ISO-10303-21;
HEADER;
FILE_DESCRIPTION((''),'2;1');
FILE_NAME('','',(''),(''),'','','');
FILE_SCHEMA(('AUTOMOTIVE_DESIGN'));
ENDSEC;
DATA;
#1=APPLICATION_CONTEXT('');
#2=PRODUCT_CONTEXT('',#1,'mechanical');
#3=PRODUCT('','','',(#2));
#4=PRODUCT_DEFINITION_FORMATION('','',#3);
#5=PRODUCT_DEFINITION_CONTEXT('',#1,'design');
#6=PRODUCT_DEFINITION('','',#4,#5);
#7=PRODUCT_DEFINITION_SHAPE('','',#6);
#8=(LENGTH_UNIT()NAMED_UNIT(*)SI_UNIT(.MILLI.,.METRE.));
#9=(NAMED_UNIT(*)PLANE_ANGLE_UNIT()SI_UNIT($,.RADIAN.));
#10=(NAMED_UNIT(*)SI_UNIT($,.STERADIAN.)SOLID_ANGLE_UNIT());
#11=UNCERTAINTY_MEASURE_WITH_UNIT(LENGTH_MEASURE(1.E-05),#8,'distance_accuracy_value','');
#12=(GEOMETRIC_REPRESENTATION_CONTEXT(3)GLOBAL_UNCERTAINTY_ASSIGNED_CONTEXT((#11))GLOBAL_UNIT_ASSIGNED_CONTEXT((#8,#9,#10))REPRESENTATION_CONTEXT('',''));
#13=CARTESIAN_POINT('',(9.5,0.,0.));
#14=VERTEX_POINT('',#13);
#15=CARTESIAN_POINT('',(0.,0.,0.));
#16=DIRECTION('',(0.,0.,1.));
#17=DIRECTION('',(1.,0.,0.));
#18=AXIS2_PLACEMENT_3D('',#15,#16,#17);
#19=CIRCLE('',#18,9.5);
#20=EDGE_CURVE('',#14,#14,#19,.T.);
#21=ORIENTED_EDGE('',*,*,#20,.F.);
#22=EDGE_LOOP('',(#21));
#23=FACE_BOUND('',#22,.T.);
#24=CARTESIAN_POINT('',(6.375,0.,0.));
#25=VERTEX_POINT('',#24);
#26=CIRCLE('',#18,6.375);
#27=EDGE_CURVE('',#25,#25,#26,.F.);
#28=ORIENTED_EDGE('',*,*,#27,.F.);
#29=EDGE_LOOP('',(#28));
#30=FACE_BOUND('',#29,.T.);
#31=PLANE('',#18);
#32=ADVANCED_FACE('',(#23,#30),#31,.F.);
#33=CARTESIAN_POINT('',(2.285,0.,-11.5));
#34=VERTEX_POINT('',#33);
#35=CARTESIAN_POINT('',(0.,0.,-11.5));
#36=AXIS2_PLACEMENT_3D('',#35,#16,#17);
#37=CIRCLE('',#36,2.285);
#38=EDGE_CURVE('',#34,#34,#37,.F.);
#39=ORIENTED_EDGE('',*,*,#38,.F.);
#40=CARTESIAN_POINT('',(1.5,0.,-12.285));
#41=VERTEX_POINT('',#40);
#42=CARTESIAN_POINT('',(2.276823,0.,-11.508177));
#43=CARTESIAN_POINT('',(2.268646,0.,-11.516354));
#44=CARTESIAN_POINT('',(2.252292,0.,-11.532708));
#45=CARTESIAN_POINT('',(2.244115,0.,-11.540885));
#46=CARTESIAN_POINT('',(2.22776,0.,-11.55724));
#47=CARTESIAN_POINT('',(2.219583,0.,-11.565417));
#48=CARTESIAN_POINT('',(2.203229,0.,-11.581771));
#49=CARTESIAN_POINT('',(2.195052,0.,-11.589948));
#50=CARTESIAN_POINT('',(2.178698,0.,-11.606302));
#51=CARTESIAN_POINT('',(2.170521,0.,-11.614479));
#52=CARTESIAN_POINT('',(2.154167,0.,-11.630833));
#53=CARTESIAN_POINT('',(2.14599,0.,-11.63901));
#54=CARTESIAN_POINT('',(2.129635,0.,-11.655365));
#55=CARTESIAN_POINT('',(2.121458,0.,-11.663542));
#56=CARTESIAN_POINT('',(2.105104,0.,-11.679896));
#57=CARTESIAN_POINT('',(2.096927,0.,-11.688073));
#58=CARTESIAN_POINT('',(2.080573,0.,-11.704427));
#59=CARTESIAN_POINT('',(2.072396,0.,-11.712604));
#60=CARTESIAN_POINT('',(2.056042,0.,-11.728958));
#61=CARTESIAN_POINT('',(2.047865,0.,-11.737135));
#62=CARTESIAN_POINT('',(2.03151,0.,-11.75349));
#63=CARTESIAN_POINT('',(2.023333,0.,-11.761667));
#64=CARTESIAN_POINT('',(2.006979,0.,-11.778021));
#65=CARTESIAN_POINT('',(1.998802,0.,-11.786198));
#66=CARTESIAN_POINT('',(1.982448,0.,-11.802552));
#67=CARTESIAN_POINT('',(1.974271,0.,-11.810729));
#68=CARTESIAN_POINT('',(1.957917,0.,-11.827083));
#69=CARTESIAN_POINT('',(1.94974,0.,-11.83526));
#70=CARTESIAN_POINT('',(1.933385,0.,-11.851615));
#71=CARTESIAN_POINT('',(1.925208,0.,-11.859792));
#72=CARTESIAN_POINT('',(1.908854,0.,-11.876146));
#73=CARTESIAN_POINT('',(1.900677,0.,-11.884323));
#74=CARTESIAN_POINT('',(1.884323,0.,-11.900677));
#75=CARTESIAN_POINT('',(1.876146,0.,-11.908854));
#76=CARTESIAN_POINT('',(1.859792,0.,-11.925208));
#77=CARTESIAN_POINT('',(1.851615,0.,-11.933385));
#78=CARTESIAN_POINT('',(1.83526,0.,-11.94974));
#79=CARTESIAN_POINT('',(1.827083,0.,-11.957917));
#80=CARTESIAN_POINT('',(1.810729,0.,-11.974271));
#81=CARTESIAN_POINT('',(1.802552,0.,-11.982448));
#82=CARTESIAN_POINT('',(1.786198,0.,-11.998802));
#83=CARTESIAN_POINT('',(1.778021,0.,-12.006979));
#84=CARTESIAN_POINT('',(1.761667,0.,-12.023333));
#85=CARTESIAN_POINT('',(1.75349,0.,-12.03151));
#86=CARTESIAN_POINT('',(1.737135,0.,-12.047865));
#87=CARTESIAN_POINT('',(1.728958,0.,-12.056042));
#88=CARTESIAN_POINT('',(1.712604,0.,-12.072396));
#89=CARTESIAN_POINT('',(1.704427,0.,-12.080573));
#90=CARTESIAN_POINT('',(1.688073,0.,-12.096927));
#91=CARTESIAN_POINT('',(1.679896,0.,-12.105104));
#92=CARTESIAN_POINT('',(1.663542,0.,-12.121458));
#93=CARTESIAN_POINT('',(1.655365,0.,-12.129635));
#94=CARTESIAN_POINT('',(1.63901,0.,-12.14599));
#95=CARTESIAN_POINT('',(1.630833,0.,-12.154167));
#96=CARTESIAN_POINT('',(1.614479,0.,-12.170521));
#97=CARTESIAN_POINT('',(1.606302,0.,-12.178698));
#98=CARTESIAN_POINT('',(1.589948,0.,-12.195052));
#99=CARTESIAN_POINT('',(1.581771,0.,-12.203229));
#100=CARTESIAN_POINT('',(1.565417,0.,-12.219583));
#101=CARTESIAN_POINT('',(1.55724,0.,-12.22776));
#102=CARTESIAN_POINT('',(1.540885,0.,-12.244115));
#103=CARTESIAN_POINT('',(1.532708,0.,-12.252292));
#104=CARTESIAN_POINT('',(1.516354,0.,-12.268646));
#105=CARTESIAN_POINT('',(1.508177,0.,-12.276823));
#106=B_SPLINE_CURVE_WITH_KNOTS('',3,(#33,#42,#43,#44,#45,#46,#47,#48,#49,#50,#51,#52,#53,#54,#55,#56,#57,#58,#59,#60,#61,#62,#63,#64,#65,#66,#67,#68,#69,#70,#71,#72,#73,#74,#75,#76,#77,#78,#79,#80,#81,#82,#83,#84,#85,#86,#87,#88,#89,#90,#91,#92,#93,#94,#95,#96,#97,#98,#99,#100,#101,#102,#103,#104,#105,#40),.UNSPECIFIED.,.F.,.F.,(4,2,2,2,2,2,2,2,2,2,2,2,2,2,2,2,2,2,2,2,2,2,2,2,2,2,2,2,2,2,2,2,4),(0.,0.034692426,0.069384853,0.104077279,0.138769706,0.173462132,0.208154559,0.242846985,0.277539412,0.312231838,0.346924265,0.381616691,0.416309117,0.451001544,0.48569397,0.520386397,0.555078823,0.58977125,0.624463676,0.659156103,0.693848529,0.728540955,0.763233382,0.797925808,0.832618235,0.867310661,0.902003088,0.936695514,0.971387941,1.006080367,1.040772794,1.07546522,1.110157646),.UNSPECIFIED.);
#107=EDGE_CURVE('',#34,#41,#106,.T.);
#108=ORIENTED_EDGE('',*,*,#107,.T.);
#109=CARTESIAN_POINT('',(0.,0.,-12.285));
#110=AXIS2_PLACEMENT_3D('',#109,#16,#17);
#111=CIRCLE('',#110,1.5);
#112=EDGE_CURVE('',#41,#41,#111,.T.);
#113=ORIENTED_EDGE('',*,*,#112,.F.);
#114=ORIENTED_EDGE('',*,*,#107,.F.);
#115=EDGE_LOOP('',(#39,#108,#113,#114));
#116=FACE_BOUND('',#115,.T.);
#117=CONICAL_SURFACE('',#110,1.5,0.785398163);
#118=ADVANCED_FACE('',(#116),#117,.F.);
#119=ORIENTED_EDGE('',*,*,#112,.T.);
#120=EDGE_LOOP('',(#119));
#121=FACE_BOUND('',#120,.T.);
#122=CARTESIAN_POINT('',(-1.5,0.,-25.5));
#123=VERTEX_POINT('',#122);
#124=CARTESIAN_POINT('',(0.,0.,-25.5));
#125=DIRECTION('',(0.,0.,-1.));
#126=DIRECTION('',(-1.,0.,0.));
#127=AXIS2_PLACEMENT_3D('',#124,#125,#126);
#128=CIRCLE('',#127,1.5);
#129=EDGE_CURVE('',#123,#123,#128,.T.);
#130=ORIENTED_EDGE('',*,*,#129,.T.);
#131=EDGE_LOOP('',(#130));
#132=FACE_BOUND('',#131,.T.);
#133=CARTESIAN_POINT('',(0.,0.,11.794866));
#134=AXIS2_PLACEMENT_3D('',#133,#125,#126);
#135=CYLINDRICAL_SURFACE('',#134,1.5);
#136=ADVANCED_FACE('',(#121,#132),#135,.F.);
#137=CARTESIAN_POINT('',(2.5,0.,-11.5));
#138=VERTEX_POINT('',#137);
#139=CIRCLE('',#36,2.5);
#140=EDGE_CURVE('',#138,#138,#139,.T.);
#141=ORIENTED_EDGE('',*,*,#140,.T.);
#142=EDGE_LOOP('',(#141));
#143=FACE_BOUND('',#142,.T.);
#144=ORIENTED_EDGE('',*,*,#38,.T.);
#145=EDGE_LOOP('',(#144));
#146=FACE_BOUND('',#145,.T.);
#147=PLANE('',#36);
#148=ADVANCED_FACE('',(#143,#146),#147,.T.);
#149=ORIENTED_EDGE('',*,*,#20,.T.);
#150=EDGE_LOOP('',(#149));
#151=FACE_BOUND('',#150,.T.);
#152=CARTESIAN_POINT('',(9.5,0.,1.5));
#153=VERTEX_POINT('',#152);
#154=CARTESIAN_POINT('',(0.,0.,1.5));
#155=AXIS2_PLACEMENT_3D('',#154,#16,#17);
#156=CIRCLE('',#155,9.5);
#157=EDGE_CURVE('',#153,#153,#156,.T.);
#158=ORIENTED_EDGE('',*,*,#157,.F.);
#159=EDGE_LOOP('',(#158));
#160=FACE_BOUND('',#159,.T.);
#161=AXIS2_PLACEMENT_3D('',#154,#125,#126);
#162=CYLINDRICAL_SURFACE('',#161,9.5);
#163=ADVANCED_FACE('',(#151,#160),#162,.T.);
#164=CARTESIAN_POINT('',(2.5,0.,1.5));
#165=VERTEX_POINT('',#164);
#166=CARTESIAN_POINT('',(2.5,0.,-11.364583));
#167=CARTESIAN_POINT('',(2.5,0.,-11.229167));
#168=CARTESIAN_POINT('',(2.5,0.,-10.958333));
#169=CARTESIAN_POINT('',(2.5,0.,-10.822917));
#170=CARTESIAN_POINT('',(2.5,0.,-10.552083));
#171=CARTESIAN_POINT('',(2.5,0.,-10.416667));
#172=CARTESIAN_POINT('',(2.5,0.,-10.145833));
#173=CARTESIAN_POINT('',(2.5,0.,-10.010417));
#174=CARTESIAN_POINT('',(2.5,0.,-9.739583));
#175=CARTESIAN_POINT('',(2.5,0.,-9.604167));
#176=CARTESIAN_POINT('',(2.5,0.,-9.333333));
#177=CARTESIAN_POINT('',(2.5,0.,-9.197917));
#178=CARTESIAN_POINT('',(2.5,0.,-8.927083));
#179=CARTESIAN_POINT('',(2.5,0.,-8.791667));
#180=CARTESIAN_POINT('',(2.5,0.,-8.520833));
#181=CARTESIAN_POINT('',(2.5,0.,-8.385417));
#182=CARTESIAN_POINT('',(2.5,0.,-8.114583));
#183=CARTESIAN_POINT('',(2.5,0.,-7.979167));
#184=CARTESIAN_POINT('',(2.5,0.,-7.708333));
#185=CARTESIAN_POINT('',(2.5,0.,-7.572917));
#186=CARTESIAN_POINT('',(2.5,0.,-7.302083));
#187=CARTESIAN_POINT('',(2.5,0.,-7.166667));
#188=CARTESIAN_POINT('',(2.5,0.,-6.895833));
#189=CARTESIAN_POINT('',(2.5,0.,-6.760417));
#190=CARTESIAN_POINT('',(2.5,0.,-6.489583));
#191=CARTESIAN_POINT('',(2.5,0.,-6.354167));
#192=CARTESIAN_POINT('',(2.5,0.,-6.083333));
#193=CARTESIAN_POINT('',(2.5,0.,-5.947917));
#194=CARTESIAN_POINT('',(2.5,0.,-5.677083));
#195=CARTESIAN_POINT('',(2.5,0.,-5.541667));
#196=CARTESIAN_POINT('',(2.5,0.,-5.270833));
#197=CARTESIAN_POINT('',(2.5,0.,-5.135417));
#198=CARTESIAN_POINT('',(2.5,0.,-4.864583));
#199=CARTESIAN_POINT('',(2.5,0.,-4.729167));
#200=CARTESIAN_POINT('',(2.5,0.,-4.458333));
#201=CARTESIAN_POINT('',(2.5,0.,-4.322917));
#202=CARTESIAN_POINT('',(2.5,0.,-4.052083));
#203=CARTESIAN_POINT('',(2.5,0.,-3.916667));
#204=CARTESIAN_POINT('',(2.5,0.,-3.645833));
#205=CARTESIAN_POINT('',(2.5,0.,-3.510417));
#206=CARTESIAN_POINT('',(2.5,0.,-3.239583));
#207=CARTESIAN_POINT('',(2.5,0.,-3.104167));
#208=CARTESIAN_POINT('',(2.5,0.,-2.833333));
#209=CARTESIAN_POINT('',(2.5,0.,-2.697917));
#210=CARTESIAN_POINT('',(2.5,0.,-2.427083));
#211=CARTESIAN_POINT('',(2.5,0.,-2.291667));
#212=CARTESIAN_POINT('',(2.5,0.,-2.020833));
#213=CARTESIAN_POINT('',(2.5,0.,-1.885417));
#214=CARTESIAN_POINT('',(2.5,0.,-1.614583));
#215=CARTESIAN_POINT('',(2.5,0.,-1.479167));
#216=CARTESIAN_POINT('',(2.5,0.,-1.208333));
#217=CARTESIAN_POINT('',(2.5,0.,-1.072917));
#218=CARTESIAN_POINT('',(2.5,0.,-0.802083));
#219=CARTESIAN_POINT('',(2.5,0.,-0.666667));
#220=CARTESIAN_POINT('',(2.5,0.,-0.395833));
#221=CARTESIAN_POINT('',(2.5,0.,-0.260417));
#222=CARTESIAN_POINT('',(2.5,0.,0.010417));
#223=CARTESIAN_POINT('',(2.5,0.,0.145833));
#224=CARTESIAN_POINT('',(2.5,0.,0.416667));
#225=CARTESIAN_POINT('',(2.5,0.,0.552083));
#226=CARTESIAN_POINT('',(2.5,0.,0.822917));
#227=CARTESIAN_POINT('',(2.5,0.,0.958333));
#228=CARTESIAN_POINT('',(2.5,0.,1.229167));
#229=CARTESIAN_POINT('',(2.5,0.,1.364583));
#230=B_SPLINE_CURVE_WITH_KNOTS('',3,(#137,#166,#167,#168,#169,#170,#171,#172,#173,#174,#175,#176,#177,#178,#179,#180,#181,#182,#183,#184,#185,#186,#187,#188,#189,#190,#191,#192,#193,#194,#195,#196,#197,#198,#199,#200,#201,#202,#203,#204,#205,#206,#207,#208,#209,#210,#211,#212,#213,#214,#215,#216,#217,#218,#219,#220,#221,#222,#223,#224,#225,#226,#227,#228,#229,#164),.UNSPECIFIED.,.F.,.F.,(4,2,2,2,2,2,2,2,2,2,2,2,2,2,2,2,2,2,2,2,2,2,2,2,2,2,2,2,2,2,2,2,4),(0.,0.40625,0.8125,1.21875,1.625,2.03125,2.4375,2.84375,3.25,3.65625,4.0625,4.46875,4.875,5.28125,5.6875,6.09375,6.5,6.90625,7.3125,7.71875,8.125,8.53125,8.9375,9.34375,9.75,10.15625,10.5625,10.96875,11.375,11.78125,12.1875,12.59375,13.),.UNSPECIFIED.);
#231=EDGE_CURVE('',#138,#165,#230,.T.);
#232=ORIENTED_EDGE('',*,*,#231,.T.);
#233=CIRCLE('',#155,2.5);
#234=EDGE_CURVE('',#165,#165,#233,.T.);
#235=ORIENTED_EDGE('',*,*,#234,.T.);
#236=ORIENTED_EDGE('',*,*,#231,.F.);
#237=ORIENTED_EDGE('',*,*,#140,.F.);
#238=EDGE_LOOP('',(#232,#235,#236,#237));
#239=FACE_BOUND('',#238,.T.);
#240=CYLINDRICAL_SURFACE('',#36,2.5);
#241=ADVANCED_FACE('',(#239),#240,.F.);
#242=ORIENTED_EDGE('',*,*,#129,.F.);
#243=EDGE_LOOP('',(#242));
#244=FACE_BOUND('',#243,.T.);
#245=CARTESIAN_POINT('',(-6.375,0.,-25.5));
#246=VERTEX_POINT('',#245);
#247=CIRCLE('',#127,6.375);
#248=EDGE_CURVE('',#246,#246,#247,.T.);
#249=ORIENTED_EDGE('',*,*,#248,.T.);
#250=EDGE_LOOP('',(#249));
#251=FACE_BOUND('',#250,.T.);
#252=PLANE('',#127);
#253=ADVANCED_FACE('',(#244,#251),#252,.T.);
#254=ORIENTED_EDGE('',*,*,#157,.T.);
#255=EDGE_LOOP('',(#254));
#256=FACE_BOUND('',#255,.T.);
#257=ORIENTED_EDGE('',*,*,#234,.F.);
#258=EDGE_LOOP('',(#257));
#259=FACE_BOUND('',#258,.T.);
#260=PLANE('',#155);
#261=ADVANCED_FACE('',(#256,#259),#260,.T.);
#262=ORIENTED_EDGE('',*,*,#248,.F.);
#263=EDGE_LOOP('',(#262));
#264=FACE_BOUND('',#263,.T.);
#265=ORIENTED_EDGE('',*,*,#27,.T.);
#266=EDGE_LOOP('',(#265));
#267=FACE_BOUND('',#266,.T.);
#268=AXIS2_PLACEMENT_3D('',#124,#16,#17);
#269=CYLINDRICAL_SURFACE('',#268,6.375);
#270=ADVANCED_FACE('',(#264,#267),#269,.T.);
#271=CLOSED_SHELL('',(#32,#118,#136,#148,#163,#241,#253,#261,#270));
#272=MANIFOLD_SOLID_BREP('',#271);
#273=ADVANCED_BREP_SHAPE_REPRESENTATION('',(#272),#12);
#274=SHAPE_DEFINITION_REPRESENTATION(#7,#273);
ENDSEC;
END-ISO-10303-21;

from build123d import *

# Parameters (mm, degrees)
SKETCH1_R          = 19
EXTRUDE1_DEPTH     = 3
SKETCH2_R          = 12.75
EXTRUDE2_DEPTH     = 51
EXTRUDE3_START     = -26
EXTRUDE3_OUTLINE_R = 5
EXTRUDE3_DEPTH     = 26
EXTRUDE5_START     = -28
EXTRUDE5_OUTLINE_R = 3
EXTRUDE5_DEPTH     = 28
CHAMFER1_SIZE      = 1.57
SCALE1_SCALE       = 0.5


# Read off the part's stored shape, not the designer's step: Extrude3, Extrude5
with BuildPart() as part:
    # Sketch1 → Extrude1 (new body)
    with BuildSketch(Plane.XY):
        Circle(SKETCH1_R)
    extrude(amount=EXTRUDE1_DEPTH)

    # Sketch2 → Extrude2 (add)
    with BuildSketch(Plane(origin=(0, 0, 0), x_dir=(-1, 0, 0), z_dir=(0, 0, -1))):
        with Locations(Location((0, 0, 0), (0, 0, 180))):
            Circle(SKETCH2_R)
    extrude(amount=EXTRUDE2_DEPTH)

    # Extrude3 outline → Extrude3 (cut)
    with BuildSketch(Plane.XY.offset(3).offset(EXTRUDE3_START)):
        Circle(EXTRUDE3_OUTLINE_R)
    extrude(amount=EXTRUDE3_DEPTH, mode=Mode.SUBTRACT)

    # Extrude5 outline → Extrude5 (cut)
    with BuildSketch(Plane(origin=(0, 0, -51), x_dir=(-1, 0, 0), z_dir=(0, 0, -1)).offset(EXTRUDE5_START)):
        Circle(EXTRUDE5_OUTLINE_R)
    extrude(amount=EXTRUDE5_DEPTH, mode=Mode.SUBTRACT)

    # Chamfer1
    chamfer1_edges = [part.edges().sort_by_distance(p)[0] for p in [
        (3, 0, -23),
    ]]
    chamfer(chamfer1_edges, length=CHAMFER1_SIZE)


with BuildPart() as part_1:
    # Scale1: scaled about (0, 0, 0)
    add(part.part.scale(SCALE1_SCALE))


solid = part_1.part
